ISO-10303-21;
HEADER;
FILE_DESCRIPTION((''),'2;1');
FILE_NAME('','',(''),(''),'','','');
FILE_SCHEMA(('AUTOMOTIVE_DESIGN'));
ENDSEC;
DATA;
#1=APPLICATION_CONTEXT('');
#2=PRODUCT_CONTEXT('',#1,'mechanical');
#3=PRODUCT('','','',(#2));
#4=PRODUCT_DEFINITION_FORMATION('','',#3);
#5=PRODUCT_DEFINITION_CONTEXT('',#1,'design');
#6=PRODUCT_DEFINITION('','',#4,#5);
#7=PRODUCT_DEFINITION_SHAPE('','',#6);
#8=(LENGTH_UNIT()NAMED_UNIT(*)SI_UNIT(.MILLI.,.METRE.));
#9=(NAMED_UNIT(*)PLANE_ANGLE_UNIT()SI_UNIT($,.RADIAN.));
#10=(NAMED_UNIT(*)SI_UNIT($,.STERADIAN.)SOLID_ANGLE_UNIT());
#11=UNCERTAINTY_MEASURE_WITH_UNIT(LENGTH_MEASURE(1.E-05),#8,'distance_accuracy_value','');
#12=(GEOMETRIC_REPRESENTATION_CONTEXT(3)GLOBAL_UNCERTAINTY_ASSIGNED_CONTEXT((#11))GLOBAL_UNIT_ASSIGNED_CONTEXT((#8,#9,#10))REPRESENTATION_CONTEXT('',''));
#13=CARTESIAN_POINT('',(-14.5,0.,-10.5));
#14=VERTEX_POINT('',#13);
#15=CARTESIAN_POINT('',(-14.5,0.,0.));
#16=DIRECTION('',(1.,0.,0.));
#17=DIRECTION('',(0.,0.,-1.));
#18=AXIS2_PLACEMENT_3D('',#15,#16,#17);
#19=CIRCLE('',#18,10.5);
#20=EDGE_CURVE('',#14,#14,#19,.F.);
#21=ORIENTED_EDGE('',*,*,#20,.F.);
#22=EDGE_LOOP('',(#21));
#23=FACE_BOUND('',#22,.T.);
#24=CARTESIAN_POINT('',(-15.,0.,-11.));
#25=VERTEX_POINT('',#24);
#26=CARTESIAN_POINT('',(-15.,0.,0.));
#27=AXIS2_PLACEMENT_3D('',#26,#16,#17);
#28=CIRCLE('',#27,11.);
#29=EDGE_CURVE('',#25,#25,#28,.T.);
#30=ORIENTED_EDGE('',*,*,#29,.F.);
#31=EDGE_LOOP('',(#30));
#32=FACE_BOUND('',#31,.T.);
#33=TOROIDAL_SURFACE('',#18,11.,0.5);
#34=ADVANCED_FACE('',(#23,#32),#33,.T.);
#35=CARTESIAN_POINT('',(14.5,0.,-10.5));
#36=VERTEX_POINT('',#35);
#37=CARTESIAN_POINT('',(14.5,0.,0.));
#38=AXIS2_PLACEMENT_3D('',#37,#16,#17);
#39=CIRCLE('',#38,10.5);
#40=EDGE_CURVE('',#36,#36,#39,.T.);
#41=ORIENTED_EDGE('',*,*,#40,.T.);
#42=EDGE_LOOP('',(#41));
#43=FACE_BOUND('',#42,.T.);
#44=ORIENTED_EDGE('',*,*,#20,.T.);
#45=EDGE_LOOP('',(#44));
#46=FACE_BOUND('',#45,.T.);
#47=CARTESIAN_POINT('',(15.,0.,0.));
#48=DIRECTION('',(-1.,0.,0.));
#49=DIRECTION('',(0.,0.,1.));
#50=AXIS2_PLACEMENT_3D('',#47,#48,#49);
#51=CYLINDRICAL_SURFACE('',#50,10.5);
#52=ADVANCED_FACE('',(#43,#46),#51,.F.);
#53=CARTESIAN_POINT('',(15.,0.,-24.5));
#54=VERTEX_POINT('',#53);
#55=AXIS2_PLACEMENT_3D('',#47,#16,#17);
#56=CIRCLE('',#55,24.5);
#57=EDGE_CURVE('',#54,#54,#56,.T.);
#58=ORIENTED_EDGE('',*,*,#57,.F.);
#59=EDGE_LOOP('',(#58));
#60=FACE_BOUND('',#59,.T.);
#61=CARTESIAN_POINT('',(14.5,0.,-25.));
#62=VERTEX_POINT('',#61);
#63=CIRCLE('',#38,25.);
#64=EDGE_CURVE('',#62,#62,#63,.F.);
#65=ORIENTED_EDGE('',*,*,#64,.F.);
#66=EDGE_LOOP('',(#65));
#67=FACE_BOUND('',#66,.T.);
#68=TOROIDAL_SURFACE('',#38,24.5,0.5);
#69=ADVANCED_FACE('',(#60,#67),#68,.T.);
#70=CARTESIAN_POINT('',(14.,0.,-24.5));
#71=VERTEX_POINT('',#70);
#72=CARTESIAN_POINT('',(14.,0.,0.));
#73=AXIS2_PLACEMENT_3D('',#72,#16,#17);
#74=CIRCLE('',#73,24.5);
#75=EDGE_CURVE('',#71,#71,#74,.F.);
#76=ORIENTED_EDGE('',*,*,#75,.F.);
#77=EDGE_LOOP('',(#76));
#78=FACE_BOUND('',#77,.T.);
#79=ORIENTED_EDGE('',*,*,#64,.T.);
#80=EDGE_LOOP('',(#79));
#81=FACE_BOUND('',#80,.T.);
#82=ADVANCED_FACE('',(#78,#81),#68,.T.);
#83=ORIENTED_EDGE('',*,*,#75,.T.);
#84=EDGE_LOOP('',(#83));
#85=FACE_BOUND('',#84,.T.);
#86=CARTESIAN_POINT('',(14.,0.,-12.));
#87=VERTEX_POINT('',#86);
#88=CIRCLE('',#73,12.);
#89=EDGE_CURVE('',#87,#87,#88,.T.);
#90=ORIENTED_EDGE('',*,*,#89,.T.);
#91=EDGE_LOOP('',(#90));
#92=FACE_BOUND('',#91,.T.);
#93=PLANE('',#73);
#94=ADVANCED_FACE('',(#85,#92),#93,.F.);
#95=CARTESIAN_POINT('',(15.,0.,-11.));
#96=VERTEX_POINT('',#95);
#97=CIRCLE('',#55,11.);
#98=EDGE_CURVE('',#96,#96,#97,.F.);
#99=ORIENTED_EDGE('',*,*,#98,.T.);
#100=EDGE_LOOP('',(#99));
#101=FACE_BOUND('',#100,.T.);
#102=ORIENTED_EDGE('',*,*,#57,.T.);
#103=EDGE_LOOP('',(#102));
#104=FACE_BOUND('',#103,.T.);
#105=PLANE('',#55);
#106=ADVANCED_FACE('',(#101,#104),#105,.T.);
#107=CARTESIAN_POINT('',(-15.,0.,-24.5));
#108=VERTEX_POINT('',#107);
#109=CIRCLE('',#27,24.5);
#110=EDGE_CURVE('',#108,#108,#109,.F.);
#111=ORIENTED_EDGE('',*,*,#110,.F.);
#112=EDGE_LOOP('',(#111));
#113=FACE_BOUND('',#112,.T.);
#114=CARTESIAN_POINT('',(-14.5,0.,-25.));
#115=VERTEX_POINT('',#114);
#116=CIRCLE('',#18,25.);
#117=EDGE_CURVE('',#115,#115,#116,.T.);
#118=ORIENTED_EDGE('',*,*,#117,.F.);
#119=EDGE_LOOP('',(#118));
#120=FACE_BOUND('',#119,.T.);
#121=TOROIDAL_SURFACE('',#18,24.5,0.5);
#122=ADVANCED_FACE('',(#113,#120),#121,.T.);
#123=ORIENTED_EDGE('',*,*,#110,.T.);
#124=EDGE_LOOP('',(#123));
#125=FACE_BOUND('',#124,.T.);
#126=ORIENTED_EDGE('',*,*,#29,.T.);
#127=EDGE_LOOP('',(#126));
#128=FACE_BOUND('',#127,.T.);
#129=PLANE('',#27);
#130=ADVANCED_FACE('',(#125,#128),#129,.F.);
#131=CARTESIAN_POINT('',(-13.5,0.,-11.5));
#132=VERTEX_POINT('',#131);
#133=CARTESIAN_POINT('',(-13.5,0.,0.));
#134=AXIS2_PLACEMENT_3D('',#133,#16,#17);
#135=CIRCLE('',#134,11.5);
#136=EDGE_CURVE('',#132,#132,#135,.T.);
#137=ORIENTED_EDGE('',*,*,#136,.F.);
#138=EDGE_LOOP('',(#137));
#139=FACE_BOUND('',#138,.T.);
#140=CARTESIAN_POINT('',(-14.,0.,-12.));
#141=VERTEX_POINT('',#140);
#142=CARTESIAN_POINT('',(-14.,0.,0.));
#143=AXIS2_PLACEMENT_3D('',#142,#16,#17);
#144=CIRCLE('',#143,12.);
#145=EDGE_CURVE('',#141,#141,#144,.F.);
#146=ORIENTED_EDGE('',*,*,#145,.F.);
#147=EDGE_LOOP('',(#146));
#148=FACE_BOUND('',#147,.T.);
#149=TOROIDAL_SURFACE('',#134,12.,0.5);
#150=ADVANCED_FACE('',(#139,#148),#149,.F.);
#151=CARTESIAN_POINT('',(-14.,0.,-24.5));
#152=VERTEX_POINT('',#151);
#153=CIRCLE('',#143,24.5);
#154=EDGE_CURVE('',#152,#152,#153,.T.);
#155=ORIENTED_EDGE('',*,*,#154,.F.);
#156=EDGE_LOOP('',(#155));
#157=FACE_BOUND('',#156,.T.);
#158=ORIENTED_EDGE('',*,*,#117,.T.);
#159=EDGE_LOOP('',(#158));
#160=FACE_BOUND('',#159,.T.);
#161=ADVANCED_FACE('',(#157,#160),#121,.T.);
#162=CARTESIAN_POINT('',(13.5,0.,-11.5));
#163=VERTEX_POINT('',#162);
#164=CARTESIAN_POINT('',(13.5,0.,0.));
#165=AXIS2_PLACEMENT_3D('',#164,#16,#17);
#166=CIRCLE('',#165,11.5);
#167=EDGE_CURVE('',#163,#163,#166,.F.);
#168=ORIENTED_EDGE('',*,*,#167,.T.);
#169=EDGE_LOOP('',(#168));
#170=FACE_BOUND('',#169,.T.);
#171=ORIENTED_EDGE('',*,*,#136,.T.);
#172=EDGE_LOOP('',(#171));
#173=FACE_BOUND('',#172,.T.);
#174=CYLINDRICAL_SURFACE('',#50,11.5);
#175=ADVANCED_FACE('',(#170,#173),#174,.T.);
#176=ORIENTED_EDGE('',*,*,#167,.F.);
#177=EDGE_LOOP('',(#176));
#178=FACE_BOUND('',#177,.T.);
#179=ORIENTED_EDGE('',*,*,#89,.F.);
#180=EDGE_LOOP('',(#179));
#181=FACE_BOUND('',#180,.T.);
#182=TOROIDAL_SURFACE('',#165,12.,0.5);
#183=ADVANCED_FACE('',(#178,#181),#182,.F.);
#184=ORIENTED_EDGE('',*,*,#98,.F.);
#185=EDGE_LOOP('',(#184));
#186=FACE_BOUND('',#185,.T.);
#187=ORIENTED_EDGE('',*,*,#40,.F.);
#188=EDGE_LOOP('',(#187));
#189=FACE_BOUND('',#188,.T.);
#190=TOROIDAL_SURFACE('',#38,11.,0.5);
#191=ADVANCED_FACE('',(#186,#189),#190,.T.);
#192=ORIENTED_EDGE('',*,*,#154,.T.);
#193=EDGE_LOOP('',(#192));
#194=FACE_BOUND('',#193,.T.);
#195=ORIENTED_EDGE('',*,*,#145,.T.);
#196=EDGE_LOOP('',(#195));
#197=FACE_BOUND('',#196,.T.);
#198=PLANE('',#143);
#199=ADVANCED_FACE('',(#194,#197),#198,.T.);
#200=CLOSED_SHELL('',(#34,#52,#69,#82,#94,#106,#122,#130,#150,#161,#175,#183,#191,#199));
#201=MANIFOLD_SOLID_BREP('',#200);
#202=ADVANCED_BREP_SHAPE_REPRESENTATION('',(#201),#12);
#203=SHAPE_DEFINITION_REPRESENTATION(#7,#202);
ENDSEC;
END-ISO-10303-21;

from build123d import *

# Parameters (mm, degrees)
SKETCH1_R           = 11.5
SKETCH1_R_2         = 10.5
BOSS_EXTRUDE1_DEPTH = 15
BOSS_EXTRUDE2_START = 15
SKETCH1_3_R         = 25
SKETCH1_3_R_2       = 11.5
BOSS_EXTRUDE2_DEPTH = 1
BOSS_EXTRUDE3_START = -14
SKETCH1_4_R         = 25
SKETCH1_4_R_2       = 11.5
BOSS_EXTRUDE3_DEPTH = 1
FILLET1_R           = 0.5


with BuildPart() as part:
    # Sketch1 → Boss-Extrude1 (new, symmetric)
    with BuildSketch(Plane(origin=(0, 0, 0), x_dir=(0, 0, -1), z_dir=(1, 0, 0))):
        Circle(SKETCH1_R)
        Circle(SKETCH1_R_2, mode=Mode.SUBTRACT)
    extrude(amount=BOSS_EXTRUDE1_DEPTH, both=True)

    # Sketch1<3> → Boss-Extrude2 (add)
    with BuildSketch(Plane(origin=(0, 0, 0), x_dir=(0, 0, -1), z_dir=(1, 0, 0)).offset(BOSS_EXTRUDE2_START)):
        Circle(SKETCH1_3_R)
        Circle(SKETCH1_3_R_2, mode=Mode.SUBTRACT)
    extrude(amount=-BOSS_EXTRUDE2_DEPTH)

    # Sketch1<4> → Boss-Extrude3 (add)
    with BuildSketch(Plane(origin=(0, 0, 0), x_dir=(0, 0, -1), z_dir=(1, 0, 0)).offset(BOSS_EXTRUDE3_START)):
        Circle(SKETCH1_4_R)
        Circle(SKETCH1_4_R_2, mode=Mode.SUBTRACT)
    extrude(amount=-BOSS_EXTRUDE3_DEPTH)

    # Fillet1
    fillet1_edges = [part.edges().sort_by_distance(p)[0] for p in [
        (-14, 0, 11.5),
        (-15, 0, 25),
        (-14, 0, 25),
        (-15, 0, 10.5),
        (15, 0, 10.5),
        (14, 0, 11.5),
        (14, 0, 25),
        (15, 0, 25),
    ]]
    fillet(fillet1_edges, radius=FILLET1_R - 0.0001)  # a hair under: the kernel refuses the full size


solid = part.part
